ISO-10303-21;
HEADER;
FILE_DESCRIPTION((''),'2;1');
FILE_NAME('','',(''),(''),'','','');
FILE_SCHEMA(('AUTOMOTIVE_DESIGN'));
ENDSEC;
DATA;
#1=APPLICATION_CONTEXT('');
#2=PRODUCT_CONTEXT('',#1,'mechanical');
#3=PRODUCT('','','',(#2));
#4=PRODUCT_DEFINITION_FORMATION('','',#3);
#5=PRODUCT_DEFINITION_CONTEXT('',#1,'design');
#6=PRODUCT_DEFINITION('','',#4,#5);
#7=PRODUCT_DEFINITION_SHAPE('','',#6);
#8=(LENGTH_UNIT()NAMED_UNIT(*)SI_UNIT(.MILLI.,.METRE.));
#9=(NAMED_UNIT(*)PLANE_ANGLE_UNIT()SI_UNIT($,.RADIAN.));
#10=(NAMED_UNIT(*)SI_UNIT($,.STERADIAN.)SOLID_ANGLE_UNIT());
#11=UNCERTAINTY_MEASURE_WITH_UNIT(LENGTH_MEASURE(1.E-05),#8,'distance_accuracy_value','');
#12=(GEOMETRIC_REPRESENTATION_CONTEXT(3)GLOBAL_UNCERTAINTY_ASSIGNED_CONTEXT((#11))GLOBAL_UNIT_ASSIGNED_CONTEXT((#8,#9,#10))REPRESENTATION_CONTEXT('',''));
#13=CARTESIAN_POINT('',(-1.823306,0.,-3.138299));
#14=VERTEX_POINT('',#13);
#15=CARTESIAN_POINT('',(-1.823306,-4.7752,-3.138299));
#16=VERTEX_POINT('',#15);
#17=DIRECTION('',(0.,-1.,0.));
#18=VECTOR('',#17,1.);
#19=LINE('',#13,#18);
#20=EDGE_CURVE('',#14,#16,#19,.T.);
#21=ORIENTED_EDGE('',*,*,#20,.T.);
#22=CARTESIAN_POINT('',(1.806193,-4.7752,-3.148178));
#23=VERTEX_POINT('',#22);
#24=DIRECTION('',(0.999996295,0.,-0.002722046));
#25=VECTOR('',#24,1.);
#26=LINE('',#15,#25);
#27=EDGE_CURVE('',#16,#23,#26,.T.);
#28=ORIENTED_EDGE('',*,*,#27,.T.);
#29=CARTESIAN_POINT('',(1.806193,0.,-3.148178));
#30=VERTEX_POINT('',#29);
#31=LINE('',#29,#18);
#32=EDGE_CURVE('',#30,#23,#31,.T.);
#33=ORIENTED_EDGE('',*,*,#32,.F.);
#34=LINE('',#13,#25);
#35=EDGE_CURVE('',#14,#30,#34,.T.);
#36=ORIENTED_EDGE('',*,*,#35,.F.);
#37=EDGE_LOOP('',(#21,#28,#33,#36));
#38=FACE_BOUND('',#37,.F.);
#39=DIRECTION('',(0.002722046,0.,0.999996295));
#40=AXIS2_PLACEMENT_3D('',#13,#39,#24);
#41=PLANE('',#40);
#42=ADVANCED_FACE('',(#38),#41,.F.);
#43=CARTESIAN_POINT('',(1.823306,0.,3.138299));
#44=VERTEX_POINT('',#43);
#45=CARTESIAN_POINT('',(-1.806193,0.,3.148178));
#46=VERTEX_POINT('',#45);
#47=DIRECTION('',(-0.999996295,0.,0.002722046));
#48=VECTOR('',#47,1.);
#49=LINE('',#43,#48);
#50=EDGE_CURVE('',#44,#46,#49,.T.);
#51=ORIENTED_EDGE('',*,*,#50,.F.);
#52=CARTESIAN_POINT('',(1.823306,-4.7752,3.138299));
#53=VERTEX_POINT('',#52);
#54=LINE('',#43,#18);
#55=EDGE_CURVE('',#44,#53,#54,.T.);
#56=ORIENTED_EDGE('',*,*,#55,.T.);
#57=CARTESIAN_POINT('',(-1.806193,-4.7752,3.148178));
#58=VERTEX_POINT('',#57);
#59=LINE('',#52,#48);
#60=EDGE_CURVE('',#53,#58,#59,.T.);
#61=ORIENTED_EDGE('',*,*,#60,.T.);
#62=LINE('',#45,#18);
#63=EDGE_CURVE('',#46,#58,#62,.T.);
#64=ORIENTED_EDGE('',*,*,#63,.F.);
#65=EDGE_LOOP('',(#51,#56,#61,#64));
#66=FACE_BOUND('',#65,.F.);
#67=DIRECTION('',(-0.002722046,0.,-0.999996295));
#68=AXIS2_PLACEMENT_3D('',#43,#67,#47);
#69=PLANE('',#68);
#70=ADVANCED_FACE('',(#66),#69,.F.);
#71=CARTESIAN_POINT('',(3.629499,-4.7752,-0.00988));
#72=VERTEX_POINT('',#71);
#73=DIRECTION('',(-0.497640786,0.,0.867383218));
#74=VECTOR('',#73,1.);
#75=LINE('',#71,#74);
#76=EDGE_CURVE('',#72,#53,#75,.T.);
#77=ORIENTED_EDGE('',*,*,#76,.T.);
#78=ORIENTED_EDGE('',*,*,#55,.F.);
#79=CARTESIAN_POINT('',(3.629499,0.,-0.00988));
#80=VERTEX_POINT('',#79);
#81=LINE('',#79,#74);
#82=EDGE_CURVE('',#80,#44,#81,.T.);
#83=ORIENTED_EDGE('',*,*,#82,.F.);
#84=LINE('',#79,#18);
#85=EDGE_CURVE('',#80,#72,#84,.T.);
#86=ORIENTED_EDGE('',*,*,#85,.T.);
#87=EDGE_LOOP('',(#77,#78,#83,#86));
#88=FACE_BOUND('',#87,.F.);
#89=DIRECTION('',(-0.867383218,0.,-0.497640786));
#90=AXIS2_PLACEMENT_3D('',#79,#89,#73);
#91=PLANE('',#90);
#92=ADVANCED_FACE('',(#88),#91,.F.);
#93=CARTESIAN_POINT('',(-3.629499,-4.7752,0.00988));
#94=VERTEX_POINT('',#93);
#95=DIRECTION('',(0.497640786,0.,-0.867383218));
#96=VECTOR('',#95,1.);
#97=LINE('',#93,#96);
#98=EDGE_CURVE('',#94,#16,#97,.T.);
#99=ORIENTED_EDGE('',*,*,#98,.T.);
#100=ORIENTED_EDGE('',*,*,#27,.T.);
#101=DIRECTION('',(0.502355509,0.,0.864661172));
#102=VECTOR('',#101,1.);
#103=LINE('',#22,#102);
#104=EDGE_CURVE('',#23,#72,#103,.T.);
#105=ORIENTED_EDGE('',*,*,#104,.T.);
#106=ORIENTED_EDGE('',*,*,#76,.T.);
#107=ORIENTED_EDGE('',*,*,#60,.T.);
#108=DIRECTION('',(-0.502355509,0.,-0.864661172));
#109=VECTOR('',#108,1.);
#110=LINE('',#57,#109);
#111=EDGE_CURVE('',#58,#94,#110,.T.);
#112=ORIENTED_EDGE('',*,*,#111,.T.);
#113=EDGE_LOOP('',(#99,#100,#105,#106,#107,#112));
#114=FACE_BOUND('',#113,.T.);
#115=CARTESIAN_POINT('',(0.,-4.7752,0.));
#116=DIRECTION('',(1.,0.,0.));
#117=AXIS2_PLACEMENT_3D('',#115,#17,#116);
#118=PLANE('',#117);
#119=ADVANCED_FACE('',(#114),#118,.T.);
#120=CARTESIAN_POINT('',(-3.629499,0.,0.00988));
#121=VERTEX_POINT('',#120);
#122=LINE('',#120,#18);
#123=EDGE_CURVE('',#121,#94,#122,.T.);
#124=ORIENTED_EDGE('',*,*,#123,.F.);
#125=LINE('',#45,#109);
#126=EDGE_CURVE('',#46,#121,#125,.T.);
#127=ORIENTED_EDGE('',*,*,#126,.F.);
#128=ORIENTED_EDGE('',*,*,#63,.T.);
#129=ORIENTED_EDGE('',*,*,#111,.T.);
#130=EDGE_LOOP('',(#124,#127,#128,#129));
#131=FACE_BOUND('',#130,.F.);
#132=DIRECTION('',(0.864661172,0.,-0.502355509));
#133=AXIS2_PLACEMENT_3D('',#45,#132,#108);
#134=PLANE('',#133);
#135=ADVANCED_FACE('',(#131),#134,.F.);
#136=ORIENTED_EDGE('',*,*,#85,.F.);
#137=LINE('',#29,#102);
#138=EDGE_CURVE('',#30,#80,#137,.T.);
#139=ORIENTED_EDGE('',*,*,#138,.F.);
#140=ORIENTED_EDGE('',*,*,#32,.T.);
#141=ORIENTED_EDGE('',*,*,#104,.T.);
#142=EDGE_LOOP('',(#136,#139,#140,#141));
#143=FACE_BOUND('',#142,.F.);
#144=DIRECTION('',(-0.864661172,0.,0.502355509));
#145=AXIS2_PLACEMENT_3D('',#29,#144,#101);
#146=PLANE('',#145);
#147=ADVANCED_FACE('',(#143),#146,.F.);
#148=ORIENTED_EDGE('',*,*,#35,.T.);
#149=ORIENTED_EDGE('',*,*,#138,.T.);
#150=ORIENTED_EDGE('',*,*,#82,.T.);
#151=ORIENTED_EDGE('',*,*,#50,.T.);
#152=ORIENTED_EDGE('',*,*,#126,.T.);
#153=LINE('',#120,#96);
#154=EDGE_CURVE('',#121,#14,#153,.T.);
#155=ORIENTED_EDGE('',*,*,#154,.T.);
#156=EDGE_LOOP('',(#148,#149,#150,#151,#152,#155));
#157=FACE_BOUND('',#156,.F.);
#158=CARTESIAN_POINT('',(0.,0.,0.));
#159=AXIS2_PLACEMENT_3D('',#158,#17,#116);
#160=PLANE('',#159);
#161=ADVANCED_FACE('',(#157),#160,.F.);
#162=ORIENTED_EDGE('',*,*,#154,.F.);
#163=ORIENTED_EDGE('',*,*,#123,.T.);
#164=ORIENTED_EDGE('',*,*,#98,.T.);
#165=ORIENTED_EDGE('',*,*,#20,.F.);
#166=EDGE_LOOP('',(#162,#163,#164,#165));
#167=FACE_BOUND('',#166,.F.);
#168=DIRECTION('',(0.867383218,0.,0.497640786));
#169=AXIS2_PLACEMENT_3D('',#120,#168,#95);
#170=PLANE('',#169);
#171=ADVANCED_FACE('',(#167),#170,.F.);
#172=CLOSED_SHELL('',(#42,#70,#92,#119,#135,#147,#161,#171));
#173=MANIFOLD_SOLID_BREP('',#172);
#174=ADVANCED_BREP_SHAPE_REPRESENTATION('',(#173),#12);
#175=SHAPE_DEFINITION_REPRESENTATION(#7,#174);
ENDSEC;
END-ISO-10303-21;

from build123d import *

# Parameters (mm, degrees)
F2_DEPTH = 4.7752


# Not quite as in the source:
# - a variable given as a bare number and used for a length is read in inches; the dataset says mm whatever the document's units were


with BuildPart() as f2:
    # F1 (on Front) → F2 (new body)
    with BuildSketch(Plane.XZ):
        Polygon((3.6294990207, -0.0098797008), (1.8233055822, 3.1382985046), (-1.8061934385, 3.1481782053), (-3.6294990207, 0.0098797008), (-1.8233055822, -3.1382985046), (1.8061934385, -3.1481782053), align=None)
    extrude(amount=F2_DEPTH)


solid = f2.part
